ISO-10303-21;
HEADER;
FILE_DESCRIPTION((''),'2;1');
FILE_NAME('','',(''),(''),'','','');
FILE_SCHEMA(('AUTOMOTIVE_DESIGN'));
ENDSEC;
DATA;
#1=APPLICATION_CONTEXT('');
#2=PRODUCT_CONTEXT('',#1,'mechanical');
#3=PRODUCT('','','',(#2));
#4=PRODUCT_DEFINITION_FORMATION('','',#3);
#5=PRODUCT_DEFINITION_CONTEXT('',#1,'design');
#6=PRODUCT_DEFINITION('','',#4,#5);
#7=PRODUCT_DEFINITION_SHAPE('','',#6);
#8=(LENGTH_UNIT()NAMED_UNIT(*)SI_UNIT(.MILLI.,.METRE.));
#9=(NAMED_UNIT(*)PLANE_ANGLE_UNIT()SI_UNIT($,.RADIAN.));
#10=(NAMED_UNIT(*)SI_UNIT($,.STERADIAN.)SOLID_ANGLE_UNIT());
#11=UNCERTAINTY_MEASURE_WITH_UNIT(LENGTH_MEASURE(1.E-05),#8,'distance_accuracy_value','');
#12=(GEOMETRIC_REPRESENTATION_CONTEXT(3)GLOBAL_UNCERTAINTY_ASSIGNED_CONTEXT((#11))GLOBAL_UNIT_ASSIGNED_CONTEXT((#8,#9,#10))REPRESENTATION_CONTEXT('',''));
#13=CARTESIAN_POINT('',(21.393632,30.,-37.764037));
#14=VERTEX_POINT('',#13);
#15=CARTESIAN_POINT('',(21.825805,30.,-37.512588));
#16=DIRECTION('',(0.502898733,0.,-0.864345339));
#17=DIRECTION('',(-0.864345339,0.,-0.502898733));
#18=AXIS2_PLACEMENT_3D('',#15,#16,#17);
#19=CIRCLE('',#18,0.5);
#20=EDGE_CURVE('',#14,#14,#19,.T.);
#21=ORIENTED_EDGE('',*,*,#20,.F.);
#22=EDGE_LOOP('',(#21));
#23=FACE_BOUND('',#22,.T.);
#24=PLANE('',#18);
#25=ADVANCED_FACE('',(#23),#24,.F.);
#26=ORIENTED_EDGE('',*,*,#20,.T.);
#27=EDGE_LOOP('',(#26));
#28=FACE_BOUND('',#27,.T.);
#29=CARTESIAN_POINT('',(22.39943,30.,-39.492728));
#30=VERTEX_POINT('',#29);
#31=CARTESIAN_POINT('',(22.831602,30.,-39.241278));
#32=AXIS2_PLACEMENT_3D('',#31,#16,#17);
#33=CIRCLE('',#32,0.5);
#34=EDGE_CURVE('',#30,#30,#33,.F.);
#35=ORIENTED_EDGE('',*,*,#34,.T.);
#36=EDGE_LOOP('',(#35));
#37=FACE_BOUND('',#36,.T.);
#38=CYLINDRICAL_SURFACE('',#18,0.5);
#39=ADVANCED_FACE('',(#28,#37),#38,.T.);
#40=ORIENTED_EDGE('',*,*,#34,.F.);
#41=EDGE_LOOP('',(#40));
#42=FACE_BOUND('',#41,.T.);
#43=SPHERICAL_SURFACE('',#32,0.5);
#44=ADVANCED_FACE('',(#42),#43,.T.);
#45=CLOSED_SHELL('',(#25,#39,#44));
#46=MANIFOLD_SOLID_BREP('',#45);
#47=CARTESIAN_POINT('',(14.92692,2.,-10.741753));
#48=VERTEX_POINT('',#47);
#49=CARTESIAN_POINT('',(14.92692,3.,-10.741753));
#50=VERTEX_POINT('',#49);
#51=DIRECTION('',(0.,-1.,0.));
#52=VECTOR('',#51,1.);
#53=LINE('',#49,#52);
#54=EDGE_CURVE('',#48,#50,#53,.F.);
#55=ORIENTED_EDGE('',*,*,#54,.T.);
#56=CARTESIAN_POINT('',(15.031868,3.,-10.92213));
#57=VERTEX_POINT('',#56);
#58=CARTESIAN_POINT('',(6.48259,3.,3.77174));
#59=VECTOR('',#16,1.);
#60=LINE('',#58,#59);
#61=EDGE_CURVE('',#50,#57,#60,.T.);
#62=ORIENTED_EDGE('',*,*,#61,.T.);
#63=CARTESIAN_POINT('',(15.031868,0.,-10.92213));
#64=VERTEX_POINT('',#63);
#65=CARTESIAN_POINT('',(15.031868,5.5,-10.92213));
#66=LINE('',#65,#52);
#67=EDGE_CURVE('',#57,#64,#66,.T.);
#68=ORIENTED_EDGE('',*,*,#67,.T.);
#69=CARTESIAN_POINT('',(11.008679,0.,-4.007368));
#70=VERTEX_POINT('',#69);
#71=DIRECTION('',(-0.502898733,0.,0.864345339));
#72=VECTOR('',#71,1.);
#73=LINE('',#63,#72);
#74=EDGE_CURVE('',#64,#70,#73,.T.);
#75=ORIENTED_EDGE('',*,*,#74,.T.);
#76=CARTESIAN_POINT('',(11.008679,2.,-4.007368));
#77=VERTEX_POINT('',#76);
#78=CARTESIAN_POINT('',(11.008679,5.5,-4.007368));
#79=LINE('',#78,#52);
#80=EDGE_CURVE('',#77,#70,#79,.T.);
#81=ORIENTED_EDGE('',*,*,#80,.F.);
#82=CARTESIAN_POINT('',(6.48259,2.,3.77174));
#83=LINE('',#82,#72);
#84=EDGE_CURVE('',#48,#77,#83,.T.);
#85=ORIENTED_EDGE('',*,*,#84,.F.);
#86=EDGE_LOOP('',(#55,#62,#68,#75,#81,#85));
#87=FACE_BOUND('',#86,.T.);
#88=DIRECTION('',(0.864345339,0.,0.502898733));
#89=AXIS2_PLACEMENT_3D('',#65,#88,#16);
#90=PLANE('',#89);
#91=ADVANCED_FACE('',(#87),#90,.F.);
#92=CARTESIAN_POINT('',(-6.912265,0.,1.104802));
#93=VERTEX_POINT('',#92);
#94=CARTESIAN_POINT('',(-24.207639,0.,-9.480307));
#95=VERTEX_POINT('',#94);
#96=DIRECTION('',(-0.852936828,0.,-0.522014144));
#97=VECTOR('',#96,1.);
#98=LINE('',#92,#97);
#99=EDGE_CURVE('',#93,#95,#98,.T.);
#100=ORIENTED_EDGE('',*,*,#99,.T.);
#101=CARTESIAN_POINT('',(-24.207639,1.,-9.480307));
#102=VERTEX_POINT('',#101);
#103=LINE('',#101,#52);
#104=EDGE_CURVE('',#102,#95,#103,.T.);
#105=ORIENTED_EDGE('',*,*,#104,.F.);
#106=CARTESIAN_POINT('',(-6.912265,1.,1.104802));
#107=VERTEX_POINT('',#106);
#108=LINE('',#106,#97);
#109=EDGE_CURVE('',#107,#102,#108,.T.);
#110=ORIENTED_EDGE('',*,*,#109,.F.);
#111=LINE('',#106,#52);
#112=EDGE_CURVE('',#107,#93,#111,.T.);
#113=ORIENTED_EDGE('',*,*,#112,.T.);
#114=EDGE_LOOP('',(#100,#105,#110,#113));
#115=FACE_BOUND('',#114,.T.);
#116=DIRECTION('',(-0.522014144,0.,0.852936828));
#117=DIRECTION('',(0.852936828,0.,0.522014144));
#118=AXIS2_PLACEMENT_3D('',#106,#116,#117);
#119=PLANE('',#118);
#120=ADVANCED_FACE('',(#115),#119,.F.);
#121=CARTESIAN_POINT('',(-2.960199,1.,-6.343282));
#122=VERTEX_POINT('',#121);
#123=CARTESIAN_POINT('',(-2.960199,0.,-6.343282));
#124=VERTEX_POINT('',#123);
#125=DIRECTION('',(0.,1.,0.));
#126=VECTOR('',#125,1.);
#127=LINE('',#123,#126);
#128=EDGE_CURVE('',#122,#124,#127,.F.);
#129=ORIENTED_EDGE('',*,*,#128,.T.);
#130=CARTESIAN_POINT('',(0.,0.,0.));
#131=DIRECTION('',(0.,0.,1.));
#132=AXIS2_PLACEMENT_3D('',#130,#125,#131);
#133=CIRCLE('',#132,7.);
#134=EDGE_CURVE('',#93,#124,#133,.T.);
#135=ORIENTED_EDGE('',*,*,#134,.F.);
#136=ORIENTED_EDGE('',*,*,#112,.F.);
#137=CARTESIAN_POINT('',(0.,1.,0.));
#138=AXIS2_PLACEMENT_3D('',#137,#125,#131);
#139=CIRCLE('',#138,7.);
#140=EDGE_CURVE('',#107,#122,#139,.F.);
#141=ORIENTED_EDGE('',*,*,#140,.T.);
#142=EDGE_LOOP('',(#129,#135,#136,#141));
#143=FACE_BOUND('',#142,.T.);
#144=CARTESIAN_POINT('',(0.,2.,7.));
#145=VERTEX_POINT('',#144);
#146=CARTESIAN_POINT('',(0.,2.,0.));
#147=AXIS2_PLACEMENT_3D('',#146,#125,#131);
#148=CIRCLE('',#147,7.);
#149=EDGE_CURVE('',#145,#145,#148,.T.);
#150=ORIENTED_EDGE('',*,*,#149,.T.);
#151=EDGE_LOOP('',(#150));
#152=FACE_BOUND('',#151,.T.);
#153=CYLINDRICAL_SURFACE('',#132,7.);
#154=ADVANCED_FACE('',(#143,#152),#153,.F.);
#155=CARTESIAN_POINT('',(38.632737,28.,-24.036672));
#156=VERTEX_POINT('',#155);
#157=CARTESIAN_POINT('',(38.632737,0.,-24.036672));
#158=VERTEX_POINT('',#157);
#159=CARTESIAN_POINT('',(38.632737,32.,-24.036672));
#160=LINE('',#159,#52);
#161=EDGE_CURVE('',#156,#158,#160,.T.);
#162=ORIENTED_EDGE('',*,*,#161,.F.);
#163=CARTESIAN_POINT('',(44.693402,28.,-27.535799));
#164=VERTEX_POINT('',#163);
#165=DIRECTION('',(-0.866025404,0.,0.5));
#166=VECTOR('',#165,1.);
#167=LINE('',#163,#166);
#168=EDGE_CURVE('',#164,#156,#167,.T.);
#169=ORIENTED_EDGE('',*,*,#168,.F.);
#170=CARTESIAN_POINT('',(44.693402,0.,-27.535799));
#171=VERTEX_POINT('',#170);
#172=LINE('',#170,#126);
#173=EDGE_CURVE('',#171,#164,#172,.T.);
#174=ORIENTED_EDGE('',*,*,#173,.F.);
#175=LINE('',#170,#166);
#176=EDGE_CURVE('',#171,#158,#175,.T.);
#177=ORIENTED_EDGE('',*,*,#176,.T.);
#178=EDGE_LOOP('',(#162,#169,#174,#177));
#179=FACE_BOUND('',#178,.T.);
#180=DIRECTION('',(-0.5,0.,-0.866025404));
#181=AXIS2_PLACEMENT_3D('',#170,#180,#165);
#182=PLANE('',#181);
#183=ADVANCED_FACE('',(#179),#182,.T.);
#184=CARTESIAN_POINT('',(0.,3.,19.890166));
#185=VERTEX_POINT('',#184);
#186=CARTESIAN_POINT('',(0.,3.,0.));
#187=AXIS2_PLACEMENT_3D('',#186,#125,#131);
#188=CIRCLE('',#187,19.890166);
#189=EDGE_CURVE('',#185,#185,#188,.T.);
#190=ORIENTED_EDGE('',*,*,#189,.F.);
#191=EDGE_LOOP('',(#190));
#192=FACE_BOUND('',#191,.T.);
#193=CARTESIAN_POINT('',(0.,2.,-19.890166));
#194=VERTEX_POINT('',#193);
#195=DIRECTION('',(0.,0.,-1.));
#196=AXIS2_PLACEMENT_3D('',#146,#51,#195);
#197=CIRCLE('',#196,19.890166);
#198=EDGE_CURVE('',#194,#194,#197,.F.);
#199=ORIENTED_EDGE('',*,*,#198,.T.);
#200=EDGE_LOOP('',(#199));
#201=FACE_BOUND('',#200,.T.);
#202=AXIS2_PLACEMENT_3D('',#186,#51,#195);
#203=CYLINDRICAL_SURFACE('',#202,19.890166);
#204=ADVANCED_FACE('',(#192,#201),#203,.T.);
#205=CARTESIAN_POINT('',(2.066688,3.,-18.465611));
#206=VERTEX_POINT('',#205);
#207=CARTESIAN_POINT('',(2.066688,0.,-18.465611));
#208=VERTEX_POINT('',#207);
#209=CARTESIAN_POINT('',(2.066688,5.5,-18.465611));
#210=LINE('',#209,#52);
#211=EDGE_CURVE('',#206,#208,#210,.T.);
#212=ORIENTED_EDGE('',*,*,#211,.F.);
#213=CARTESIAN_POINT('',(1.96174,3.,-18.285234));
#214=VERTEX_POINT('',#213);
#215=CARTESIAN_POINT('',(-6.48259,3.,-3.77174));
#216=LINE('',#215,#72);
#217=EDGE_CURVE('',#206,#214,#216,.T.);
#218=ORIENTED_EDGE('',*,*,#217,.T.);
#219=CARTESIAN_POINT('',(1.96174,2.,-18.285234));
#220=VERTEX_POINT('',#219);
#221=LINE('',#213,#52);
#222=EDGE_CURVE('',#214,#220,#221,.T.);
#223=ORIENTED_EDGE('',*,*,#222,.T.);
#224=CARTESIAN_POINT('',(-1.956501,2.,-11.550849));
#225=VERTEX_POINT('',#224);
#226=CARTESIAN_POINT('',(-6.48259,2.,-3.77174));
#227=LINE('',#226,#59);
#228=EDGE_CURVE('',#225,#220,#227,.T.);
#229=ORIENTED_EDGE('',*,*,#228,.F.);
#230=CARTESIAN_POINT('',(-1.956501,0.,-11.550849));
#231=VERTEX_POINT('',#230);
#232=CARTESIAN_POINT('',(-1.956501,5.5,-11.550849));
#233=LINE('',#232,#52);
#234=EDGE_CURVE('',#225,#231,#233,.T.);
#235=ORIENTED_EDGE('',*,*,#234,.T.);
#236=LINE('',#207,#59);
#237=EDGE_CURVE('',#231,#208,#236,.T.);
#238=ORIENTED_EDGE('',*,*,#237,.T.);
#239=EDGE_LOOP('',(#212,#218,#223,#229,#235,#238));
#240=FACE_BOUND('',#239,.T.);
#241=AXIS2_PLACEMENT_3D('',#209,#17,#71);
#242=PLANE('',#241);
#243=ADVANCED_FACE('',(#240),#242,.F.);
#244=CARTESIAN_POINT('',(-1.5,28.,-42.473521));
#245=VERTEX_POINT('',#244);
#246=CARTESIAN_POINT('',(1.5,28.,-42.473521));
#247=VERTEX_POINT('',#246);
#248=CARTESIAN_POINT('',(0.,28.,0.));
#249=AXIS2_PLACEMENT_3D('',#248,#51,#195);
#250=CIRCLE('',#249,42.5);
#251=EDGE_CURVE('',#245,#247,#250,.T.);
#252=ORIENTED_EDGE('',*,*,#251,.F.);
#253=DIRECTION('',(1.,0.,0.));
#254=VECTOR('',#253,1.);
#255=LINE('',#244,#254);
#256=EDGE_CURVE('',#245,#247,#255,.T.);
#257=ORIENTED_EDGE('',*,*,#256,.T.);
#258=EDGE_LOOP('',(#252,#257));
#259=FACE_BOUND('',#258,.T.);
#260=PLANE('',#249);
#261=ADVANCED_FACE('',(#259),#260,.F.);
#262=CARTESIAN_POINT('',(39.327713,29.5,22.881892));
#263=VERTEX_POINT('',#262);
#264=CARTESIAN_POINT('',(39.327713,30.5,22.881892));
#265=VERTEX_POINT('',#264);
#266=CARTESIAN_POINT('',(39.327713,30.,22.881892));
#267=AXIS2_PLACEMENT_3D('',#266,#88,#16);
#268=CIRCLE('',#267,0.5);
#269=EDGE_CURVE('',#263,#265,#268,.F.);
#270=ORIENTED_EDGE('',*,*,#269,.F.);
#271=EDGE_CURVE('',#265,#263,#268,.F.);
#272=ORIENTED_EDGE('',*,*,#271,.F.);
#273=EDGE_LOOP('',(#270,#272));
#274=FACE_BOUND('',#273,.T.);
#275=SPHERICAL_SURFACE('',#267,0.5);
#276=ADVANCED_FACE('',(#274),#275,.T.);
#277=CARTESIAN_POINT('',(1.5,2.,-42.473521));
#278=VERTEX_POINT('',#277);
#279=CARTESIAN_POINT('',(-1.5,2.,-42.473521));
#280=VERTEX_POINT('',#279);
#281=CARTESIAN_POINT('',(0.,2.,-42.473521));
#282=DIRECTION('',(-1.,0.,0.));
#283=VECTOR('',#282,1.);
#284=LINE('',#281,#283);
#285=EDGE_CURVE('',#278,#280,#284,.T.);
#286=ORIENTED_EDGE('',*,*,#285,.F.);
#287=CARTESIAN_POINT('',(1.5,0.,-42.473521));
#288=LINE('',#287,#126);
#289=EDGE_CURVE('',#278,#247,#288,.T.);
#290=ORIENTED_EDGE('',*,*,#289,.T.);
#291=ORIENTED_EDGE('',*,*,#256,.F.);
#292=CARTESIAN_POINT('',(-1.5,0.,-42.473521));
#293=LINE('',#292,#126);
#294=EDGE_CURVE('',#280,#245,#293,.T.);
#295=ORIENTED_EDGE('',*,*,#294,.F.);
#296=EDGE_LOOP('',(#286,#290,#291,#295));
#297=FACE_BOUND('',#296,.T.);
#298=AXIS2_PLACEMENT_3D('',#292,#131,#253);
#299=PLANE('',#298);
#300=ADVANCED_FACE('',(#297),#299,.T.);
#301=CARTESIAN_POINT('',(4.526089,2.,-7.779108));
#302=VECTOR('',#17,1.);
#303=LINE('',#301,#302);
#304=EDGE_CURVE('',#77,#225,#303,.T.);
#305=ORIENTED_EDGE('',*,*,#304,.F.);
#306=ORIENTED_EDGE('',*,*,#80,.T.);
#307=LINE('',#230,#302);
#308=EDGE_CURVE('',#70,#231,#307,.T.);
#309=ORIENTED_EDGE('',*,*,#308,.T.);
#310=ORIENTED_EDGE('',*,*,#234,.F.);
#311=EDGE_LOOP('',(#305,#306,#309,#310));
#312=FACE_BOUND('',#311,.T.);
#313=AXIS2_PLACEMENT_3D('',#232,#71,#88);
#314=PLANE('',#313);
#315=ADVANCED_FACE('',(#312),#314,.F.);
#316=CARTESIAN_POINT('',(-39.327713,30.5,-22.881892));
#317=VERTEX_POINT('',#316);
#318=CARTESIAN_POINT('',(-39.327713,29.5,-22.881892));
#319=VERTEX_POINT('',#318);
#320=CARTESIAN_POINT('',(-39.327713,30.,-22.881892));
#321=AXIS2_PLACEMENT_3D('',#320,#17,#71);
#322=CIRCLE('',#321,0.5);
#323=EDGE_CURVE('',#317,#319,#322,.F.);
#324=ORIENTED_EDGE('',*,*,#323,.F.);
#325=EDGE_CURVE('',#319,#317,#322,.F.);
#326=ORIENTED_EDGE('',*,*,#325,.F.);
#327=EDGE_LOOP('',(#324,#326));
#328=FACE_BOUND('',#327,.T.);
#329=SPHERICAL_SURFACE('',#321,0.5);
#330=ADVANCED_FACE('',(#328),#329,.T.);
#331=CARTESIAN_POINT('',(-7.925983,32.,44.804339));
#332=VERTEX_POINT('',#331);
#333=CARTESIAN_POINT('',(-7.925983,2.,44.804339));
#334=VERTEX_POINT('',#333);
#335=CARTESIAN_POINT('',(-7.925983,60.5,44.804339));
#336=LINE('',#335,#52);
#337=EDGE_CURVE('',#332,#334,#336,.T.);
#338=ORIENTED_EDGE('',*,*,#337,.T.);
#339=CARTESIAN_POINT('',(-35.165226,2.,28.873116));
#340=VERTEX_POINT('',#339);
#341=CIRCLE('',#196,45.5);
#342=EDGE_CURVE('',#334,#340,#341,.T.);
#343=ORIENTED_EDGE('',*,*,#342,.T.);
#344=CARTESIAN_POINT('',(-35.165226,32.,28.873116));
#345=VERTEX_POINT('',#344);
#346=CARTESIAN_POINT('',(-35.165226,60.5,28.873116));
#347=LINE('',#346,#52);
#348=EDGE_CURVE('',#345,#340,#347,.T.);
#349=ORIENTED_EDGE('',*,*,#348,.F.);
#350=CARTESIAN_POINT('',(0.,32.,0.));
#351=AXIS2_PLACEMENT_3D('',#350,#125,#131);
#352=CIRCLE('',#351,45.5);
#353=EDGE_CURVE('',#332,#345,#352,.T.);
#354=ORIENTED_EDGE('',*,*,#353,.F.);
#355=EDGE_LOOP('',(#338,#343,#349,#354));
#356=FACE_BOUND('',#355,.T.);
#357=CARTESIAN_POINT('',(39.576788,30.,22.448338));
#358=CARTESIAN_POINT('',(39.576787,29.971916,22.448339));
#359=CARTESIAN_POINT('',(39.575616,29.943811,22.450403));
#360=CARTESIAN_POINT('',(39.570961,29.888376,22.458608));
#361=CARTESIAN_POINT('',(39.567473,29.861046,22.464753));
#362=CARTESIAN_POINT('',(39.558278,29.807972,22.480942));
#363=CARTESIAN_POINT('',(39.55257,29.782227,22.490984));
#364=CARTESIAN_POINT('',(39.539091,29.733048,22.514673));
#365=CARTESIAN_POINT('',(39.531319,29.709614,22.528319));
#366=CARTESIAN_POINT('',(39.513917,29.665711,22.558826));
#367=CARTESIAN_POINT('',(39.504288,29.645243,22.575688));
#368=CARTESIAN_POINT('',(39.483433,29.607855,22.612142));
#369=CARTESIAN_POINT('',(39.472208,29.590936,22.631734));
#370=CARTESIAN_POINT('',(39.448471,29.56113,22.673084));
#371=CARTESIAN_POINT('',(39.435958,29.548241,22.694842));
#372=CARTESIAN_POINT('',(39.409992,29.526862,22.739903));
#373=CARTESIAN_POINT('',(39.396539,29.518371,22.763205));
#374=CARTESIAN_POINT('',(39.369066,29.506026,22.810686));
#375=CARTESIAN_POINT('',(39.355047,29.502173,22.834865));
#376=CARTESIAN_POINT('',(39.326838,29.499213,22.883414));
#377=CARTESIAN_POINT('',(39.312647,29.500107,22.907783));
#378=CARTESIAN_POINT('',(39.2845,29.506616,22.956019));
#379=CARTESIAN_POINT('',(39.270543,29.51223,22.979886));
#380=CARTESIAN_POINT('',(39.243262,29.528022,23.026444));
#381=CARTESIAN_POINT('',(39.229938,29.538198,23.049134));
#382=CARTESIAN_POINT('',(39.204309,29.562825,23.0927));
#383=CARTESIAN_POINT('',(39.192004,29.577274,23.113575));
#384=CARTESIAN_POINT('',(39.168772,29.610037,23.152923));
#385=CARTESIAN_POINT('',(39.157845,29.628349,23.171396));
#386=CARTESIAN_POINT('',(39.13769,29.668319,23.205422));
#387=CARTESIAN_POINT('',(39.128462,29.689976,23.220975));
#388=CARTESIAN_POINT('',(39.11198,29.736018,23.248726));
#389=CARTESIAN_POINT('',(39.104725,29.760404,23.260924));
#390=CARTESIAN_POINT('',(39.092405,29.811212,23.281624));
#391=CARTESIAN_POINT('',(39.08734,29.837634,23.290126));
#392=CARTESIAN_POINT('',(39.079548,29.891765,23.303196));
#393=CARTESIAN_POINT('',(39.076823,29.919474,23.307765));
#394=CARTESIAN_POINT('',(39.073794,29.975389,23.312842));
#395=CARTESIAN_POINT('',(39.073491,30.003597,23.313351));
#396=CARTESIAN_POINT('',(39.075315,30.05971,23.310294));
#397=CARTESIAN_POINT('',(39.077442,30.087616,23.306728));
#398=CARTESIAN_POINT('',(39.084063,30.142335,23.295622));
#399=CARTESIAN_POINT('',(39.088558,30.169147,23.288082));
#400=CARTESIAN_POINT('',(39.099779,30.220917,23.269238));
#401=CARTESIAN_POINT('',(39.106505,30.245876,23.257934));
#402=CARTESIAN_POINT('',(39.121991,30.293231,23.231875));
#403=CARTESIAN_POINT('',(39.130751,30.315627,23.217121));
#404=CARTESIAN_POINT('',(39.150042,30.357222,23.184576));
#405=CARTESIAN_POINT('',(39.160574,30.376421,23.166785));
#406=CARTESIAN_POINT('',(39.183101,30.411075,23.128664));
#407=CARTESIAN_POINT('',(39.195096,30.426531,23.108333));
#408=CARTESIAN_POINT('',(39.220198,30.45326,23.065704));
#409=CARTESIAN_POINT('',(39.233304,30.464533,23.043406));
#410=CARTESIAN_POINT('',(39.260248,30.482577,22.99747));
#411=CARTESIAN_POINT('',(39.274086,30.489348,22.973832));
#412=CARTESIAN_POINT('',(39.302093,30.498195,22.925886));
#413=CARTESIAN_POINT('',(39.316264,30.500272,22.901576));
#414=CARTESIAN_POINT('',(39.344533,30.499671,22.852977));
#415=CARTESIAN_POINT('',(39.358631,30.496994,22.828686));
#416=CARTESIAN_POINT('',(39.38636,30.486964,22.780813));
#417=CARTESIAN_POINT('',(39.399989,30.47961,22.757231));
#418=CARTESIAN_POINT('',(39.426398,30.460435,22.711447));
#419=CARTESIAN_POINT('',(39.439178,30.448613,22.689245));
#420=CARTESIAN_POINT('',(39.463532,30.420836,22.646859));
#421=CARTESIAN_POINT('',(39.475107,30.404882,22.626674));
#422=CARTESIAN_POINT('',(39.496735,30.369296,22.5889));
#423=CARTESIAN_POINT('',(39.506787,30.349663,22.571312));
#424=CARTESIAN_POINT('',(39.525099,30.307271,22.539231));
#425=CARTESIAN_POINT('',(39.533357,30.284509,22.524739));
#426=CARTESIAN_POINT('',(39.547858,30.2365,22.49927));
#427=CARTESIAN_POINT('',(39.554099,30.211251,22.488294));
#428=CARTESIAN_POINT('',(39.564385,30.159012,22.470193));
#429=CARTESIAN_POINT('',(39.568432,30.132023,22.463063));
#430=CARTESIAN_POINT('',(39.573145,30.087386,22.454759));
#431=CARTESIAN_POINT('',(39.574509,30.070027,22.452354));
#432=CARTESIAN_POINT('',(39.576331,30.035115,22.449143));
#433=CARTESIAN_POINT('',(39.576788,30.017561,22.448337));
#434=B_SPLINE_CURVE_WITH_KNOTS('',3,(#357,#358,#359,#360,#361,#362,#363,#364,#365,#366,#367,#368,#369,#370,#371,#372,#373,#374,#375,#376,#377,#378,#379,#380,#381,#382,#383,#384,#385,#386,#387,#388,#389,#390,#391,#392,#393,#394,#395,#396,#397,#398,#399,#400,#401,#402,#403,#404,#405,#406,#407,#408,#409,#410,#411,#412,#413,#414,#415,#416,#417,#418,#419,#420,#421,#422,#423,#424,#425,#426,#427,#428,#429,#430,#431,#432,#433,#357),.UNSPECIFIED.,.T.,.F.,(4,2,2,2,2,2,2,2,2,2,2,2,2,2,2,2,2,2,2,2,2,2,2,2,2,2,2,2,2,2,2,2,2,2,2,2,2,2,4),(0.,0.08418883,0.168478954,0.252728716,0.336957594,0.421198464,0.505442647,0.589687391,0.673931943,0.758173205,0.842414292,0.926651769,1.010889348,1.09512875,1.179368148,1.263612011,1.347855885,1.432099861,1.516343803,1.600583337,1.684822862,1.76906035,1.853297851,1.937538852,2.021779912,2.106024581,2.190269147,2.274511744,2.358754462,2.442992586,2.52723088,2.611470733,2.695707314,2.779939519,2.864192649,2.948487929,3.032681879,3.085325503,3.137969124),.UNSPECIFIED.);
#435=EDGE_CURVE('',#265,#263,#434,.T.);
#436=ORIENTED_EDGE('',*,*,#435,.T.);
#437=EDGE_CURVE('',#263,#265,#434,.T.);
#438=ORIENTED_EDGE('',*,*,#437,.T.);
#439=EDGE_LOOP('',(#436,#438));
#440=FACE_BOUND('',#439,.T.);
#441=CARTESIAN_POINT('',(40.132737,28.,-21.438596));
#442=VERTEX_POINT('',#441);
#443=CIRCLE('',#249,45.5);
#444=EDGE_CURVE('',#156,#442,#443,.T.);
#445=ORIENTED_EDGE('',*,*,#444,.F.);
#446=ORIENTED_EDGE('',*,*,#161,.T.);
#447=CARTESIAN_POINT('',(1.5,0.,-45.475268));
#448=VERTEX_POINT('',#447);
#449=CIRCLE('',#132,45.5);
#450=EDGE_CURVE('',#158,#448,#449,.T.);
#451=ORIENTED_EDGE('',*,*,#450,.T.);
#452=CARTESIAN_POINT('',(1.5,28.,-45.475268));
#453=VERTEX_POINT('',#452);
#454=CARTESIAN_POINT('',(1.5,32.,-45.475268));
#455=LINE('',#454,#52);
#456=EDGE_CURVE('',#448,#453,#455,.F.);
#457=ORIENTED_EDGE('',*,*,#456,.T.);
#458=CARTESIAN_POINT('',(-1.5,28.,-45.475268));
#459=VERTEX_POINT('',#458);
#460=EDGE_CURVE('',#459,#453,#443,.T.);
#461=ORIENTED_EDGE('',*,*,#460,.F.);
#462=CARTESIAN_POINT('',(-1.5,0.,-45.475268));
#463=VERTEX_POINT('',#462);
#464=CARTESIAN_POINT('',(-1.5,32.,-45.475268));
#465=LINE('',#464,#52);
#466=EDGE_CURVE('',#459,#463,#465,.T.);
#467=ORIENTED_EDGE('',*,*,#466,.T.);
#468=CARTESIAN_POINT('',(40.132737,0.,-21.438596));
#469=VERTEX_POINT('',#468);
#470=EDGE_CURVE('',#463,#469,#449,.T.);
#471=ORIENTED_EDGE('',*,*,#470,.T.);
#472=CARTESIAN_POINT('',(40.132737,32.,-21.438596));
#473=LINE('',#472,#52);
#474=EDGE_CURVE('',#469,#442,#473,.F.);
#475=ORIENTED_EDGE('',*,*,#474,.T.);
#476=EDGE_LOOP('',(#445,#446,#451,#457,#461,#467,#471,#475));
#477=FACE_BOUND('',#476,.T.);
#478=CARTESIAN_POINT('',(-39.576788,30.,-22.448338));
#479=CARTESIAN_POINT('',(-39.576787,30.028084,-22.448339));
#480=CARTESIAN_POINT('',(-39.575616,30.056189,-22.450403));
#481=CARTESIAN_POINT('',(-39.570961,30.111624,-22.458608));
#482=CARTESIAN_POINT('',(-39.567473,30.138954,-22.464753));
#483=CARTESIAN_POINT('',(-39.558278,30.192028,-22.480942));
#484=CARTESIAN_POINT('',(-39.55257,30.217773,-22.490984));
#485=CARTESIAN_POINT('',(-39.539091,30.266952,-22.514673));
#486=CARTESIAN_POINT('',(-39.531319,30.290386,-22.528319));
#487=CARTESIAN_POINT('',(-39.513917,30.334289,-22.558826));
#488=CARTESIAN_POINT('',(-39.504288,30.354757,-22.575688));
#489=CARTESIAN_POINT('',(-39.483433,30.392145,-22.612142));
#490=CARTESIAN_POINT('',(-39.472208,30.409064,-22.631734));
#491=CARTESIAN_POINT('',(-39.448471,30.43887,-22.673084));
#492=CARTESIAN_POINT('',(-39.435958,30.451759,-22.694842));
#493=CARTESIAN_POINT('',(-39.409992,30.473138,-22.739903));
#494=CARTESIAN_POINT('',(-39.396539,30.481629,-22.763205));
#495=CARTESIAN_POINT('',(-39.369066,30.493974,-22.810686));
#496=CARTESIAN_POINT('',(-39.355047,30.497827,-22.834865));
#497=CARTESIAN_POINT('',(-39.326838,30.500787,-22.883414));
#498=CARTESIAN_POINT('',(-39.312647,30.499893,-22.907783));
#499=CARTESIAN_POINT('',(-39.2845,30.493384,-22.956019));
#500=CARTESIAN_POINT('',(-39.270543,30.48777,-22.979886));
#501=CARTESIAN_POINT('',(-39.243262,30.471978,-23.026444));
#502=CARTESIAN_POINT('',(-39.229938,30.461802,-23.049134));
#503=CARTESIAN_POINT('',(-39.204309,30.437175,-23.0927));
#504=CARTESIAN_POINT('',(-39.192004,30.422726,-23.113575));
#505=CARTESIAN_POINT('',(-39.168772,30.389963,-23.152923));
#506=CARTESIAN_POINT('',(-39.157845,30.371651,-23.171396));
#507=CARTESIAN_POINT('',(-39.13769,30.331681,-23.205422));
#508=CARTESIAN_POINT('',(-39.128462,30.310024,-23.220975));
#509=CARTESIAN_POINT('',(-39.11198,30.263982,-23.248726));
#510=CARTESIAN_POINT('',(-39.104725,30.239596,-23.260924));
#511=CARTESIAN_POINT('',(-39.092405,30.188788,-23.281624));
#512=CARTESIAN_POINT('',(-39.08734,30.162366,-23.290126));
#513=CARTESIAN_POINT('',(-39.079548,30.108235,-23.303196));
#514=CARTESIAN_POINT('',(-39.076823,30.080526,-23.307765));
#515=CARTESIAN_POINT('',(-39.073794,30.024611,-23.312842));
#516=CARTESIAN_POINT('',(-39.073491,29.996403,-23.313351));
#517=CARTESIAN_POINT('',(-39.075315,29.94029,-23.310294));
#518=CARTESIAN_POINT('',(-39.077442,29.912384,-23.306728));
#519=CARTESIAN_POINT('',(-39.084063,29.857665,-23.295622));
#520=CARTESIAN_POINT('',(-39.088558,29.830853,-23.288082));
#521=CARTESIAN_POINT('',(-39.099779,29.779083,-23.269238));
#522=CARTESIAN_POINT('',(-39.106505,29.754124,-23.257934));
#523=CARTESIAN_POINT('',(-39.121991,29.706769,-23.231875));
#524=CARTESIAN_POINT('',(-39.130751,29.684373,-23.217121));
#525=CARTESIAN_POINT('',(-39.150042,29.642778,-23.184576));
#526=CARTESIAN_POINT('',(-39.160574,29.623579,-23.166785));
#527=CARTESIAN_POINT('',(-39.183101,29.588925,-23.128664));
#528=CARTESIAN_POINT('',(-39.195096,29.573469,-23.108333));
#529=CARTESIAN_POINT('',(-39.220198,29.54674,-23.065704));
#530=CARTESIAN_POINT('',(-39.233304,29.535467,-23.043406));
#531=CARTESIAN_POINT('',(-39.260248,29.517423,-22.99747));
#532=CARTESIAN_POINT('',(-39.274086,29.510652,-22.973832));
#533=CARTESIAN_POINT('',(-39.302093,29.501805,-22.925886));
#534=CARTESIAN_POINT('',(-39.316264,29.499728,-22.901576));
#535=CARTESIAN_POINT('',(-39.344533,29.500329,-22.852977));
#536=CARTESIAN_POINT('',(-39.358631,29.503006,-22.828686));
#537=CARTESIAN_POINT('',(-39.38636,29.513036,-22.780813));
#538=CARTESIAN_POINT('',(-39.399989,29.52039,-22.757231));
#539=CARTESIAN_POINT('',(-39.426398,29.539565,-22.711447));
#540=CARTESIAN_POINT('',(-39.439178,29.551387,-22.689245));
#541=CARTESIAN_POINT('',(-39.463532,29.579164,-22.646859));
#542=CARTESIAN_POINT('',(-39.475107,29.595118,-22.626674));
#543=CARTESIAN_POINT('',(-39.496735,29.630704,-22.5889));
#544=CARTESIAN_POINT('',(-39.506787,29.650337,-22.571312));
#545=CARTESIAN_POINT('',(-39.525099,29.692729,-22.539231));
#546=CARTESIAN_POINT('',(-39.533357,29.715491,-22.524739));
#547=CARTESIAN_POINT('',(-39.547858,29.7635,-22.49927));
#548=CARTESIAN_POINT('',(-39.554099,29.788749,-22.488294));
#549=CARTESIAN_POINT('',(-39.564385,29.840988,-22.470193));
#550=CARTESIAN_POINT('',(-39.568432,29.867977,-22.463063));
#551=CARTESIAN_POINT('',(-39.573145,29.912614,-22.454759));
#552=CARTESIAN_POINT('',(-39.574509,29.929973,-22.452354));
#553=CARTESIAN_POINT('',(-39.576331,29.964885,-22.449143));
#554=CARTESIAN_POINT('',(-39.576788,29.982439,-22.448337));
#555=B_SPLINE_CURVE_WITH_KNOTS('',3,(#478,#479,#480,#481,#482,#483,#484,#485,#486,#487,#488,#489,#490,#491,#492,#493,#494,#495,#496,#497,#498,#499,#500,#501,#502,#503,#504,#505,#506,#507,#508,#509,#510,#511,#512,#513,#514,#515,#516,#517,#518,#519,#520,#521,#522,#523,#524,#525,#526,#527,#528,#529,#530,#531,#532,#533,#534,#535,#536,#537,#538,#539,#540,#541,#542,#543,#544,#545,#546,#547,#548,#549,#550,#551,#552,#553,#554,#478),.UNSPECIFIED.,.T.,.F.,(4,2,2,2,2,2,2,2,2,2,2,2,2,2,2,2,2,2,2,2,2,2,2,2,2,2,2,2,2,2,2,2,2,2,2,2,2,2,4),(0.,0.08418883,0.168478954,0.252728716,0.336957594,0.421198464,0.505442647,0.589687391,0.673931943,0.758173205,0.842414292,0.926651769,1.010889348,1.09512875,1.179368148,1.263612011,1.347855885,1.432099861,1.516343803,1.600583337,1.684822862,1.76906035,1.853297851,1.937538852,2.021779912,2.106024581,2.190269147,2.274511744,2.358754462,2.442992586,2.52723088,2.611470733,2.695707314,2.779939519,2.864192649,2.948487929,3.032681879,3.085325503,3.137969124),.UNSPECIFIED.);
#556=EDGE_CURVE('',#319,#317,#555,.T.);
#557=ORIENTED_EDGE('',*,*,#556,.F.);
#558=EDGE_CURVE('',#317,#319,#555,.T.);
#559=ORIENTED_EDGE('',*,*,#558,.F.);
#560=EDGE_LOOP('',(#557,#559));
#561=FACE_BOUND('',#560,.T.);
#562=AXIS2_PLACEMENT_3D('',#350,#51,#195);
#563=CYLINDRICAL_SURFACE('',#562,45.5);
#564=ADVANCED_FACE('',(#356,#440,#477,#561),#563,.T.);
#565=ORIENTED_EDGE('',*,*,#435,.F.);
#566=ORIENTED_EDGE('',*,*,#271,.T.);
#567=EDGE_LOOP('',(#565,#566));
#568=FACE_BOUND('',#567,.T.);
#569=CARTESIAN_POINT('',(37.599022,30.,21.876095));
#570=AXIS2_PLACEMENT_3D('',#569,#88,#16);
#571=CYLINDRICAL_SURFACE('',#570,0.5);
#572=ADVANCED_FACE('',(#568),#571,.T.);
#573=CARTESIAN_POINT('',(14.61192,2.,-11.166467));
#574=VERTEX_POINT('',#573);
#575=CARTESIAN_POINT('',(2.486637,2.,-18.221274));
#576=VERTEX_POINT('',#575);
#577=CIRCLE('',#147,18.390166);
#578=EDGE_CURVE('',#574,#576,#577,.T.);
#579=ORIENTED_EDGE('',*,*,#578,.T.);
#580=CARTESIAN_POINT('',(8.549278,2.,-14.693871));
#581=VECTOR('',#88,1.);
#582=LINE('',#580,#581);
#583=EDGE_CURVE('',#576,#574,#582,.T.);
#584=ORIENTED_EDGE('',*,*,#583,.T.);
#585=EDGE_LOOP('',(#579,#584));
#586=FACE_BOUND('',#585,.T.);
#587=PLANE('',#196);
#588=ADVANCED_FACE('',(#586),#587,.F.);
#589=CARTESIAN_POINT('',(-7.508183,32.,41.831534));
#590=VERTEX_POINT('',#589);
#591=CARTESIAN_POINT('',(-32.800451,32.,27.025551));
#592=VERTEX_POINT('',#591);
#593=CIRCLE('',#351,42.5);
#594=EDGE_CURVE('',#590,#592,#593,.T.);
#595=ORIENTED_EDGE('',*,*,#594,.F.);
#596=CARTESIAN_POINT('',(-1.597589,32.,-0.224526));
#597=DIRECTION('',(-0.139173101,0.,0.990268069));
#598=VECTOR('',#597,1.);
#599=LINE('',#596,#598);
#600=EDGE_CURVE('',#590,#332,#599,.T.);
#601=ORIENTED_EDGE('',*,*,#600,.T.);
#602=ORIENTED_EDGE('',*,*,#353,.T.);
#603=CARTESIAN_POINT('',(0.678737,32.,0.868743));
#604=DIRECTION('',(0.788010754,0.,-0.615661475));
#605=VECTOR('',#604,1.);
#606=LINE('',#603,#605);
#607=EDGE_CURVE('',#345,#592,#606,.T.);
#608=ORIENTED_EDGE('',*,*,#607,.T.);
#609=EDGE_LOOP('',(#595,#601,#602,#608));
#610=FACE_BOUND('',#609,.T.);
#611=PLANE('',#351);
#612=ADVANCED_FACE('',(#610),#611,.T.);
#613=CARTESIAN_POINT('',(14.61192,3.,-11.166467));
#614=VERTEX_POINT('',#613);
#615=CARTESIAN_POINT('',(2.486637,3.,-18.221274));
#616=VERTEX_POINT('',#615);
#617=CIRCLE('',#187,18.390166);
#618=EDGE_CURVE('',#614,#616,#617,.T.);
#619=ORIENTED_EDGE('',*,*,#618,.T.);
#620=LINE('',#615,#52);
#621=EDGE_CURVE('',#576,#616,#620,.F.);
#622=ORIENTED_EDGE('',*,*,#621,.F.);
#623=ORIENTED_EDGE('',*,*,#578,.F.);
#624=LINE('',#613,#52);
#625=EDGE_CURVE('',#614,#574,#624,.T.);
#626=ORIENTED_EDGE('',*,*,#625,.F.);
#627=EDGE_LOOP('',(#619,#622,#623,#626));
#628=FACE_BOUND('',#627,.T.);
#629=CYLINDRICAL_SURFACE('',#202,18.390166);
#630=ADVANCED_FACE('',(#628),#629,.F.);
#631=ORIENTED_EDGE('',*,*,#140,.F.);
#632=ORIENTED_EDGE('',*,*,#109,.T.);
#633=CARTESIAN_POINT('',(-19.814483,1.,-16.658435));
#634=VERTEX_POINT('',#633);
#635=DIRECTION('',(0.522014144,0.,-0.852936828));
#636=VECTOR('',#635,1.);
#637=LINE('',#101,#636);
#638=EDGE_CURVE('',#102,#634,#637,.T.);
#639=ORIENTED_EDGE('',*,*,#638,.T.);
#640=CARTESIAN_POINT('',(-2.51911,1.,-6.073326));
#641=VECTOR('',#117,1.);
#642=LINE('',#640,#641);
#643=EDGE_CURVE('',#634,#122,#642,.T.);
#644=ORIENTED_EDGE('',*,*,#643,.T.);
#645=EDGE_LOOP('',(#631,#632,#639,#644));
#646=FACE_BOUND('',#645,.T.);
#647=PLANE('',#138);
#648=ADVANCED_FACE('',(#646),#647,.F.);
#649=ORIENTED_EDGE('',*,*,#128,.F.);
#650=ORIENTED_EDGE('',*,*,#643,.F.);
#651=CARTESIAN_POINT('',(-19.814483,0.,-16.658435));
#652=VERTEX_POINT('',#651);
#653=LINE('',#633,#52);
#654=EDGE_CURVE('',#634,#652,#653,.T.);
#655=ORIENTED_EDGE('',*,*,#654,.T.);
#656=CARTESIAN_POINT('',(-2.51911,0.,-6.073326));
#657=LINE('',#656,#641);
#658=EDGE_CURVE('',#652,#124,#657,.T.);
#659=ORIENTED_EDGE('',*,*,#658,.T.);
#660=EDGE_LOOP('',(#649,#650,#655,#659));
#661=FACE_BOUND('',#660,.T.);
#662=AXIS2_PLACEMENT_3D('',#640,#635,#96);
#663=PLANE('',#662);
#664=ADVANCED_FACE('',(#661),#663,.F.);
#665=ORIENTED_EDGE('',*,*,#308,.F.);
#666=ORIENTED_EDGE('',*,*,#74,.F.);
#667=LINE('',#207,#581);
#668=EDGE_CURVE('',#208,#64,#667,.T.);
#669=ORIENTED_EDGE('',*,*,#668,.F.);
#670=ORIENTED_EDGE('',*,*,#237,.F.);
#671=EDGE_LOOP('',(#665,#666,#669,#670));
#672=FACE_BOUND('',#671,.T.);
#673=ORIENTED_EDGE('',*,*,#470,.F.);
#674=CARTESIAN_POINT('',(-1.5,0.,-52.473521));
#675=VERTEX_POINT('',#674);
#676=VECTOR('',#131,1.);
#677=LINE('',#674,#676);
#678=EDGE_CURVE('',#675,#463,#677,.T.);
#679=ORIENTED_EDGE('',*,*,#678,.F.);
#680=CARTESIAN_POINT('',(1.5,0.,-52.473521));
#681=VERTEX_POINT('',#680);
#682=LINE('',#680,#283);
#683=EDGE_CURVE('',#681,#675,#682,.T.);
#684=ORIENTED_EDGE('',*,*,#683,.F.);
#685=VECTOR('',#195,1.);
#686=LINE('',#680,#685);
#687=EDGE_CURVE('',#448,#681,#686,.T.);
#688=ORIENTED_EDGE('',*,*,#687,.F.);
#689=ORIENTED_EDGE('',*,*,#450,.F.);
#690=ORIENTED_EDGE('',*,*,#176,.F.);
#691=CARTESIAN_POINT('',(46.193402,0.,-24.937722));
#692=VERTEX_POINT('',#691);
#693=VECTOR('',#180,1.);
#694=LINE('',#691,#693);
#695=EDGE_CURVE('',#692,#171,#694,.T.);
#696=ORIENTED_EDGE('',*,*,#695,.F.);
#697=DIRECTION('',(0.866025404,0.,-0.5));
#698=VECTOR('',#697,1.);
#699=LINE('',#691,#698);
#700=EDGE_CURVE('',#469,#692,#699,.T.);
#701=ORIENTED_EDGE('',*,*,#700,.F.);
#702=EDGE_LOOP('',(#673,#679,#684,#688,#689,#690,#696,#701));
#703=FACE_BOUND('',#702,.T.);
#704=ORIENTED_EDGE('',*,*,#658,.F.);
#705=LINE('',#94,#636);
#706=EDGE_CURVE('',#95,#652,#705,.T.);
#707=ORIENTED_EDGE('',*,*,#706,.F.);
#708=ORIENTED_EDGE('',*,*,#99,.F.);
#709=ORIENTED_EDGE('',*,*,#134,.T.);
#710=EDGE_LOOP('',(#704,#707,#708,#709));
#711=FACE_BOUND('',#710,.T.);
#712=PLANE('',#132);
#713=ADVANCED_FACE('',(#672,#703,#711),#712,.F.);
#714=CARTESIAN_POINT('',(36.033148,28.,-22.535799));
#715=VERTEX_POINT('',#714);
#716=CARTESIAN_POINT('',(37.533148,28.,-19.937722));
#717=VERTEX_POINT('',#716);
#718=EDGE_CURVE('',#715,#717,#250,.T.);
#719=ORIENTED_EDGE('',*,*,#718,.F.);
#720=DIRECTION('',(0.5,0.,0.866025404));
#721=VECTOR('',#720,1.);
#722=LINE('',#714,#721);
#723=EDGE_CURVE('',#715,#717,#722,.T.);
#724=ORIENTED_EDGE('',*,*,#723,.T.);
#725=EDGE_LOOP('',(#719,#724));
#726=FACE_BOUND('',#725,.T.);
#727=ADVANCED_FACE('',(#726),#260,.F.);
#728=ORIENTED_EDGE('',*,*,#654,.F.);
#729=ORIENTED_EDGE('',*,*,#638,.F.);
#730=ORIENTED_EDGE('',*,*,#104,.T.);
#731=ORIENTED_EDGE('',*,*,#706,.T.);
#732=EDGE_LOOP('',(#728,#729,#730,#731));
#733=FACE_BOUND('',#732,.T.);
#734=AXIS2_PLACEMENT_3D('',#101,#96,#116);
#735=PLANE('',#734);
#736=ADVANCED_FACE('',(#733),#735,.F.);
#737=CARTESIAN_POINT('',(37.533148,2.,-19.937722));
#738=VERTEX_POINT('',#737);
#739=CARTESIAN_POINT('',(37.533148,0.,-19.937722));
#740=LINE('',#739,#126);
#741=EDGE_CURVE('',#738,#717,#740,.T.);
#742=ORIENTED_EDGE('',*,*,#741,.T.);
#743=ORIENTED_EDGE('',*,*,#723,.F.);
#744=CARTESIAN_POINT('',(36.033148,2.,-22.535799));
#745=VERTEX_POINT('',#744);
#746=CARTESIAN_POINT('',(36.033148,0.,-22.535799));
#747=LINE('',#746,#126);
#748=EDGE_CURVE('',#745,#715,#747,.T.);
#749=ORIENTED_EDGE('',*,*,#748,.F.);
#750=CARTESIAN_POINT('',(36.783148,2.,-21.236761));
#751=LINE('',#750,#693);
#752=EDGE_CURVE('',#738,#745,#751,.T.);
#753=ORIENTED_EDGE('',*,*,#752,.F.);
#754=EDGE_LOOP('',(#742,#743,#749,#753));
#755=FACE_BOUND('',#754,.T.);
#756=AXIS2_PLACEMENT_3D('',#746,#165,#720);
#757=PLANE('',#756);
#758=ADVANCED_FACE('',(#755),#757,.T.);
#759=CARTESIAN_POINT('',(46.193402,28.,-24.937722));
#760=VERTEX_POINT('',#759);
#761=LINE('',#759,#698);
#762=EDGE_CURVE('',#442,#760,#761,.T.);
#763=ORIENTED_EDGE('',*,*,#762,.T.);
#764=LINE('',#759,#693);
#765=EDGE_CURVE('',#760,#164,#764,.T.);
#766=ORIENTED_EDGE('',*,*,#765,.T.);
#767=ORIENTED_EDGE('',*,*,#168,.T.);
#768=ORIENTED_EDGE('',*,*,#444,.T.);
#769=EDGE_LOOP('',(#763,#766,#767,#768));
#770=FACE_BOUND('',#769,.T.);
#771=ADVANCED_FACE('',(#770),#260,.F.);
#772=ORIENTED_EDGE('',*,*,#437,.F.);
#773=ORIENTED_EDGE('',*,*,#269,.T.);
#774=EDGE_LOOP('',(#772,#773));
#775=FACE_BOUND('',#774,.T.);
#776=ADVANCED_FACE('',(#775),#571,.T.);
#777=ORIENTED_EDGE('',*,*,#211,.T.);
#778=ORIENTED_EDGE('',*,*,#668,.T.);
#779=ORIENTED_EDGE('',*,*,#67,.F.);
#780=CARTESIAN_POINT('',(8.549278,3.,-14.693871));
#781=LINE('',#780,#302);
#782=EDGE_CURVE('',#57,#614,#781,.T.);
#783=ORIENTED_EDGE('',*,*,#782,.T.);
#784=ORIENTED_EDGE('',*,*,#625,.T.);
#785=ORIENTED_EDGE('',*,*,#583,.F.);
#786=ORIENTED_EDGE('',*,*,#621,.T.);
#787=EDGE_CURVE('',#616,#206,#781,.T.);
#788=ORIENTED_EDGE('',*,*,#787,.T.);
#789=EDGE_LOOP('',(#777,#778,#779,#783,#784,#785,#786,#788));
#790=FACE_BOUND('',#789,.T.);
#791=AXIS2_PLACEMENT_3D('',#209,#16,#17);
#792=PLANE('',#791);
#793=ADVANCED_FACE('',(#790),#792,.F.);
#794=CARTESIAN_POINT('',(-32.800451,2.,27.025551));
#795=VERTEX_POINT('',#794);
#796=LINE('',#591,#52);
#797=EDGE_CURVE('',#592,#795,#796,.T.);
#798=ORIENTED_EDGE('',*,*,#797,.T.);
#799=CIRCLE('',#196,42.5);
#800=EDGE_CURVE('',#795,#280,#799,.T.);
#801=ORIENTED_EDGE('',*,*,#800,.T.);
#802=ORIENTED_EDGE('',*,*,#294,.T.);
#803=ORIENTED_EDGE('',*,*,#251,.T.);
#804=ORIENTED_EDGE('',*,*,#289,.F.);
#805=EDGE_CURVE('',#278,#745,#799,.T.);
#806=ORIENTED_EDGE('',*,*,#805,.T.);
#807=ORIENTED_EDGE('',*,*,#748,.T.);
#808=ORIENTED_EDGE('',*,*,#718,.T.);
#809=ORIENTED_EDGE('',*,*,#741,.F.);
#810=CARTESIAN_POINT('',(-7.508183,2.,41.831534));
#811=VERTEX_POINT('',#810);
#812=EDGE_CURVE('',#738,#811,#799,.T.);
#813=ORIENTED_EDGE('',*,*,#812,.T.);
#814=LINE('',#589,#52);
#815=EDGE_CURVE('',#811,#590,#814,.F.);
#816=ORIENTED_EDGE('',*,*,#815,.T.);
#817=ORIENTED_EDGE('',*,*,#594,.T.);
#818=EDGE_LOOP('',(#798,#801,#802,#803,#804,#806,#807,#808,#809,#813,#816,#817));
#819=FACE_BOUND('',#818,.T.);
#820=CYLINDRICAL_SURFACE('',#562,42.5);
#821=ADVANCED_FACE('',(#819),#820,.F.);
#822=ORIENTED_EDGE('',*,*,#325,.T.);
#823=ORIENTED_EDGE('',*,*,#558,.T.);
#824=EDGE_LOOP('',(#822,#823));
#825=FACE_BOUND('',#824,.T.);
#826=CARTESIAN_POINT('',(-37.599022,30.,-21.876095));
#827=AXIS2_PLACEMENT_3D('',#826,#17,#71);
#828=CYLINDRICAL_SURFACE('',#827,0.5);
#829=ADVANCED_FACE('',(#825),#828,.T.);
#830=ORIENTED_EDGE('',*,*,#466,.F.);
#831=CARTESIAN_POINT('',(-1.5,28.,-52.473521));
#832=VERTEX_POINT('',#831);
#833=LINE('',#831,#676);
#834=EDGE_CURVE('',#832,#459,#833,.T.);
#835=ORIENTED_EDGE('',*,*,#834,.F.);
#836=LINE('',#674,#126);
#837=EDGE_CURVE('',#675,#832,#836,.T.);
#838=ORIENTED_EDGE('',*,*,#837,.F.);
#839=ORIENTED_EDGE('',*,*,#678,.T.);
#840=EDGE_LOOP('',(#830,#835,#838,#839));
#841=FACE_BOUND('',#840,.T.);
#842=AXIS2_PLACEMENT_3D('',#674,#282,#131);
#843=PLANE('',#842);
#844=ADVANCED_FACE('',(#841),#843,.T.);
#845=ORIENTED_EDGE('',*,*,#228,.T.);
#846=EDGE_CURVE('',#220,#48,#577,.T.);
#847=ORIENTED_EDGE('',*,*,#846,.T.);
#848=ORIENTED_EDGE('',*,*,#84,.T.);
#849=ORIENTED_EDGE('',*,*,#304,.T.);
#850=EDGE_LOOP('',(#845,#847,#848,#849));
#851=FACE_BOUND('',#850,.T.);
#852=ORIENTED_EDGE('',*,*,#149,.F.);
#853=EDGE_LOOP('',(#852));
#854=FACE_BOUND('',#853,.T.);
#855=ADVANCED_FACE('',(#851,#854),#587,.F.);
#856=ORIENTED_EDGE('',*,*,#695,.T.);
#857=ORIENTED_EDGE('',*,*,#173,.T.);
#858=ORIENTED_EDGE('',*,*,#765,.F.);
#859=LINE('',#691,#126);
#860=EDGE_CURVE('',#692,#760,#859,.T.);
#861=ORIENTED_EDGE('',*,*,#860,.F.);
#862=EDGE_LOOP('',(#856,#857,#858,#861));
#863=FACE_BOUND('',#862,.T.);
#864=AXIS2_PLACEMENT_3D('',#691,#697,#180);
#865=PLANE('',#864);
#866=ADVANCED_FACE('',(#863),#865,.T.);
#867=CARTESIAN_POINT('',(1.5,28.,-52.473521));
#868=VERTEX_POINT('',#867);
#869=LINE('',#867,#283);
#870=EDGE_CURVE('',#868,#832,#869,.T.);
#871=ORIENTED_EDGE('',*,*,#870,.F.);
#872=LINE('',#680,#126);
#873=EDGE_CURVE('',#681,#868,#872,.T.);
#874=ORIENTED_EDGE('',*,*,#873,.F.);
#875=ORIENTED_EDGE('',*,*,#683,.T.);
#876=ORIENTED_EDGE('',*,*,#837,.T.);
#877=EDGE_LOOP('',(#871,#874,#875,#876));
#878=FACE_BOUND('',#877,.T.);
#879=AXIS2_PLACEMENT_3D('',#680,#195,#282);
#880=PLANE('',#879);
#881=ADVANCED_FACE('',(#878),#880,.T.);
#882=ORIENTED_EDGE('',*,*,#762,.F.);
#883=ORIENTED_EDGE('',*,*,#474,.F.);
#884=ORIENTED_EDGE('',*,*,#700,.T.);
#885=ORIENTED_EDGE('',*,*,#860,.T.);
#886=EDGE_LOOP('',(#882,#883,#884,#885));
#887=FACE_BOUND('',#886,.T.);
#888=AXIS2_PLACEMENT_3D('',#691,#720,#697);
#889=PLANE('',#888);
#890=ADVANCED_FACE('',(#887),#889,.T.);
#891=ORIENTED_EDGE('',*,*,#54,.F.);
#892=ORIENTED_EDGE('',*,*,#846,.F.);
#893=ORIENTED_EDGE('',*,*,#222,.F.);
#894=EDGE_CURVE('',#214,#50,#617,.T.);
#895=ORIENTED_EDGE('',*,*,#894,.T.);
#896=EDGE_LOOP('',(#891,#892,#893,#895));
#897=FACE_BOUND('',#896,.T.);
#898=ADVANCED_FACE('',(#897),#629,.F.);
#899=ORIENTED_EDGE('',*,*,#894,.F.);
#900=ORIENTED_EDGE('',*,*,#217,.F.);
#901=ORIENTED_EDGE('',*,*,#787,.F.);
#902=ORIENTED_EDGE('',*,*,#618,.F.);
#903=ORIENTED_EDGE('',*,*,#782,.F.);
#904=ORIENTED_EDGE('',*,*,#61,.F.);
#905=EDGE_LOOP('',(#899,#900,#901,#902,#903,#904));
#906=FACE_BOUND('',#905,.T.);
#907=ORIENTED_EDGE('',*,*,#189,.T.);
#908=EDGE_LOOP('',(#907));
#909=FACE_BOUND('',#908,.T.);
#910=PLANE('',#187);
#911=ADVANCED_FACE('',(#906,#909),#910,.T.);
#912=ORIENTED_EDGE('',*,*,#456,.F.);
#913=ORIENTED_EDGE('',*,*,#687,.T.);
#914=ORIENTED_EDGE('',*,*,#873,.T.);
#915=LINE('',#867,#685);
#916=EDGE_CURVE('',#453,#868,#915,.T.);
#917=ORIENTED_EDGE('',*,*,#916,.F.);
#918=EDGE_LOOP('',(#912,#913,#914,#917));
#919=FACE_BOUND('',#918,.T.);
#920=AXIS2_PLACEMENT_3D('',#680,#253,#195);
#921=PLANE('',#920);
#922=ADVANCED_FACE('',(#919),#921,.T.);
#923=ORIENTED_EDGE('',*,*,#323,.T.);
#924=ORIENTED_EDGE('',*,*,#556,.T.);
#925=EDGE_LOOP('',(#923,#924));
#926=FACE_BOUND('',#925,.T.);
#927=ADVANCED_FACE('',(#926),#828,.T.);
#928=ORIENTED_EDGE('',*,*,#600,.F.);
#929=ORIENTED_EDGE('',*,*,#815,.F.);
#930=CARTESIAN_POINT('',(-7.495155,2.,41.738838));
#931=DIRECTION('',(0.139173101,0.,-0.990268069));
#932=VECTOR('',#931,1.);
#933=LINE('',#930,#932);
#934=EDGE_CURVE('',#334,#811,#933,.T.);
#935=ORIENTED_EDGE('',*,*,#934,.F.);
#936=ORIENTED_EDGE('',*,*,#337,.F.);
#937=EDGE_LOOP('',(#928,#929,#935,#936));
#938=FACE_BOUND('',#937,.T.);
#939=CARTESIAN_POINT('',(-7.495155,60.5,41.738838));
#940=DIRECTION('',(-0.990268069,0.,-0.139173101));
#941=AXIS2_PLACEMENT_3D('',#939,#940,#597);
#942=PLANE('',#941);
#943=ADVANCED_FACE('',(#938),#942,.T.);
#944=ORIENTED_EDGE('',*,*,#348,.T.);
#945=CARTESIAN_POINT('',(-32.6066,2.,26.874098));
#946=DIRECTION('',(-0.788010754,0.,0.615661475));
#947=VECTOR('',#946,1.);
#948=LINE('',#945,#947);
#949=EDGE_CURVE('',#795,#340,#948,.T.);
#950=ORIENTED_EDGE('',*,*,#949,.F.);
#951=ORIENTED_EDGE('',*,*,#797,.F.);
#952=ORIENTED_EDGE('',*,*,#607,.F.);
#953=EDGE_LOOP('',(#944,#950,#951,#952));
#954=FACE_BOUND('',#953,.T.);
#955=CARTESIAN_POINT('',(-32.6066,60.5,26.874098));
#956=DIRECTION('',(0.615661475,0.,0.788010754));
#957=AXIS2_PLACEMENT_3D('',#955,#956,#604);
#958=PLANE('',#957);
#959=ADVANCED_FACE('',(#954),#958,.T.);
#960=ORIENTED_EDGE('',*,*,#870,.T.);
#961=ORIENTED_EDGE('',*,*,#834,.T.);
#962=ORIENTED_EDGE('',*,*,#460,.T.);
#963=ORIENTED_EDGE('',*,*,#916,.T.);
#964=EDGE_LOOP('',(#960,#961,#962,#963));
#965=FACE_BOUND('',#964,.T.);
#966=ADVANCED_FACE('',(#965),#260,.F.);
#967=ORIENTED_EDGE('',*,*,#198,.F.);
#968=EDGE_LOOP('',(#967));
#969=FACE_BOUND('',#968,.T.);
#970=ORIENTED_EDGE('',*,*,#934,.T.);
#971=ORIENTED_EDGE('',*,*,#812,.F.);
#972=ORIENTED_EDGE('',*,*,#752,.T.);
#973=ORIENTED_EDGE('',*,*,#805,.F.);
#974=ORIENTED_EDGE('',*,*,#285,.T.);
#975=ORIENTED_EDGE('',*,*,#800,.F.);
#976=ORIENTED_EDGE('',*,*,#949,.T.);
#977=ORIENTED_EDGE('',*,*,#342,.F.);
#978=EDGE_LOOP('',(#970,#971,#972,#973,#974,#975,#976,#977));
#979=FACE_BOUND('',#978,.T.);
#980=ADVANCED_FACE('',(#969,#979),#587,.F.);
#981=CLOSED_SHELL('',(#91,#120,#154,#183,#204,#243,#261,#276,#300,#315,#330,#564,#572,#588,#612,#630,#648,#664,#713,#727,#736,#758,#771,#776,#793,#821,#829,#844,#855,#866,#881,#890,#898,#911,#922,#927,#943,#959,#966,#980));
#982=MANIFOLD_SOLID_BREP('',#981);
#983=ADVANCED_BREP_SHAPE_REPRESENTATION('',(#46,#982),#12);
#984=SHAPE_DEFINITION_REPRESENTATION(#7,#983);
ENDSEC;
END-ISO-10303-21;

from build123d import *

# Parameters (mm, degrees)
SKETCH1_R                = 45.5
SKETCH1_R_2              = 42.5
BOSS_EXTRUDE1_DEPTH      = 32
SKETCH2_R                = 45.5
BOSS_EXTRUDE2_DEPTH      = 2
SKETCH3_R                = 7
CUT_EXTRUDE1_DEPTH       = 2
BOSS_EXTRUDE4_DEPTH      = 26
BOSS_EXTRUDE4_DEPTH_BACK = 2
SKETCH7_W                = 3
SKETCH7_H                = 10
SKETCH8_R                = 19.890165718
SKETCH8_R_2              = 18.390165718
BOSS_EXTRUDE5_DEPTH      = 1
CUT_EXTRUDE4_DEPTH       = 5.5
CUT_EXTRUDE5_DEPTH       = 58.5
CUT_EXTRUDE6_DEPTH       = 1
BOSS_EXTRUDE6_DEPTH      = 0.5
BOSS_EXTRUDE6_DEPTH_BACK = 2
SKETCH13_R               = 0.5
FILLET1_R                = 0.5
BOSS_EXTRUDE7_START      = -2
SKETCH23_R               = 0.5
BOSS_EXTRUDE7_DEPTH      = 2.5
FILLET2_R                = 0.5
FILLET2_OF_MIRROR1_R     = 0.5


with BuildPart() as part:
    # Sketch1 → Boss-Extrude1 (new body)
    with BuildSketch(Plane(origin=(0, 0, 0), x_dir=(1, 0, 0), z_dir=(0, 1, 0))):
        with Locations(Location((0, 0, 0), (0, 0, 270))):
            Circle(SKETCH1_R)
        with Locations(Location((0, 0, 0), (0, 0, 270))):
            Circle(SKETCH1_R_2, mode=Mode.SUBTRACT)
    extrude(amount=BOSS_EXTRUDE1_DEPTH)

    # Sketch2 → Boss-Extrude2 (add)
    with BuildSketch(Plane.XZ):
        with Locations(Location((0, 0, 0), (0, 0, 90))):
            Circle(SKETCH2_R)
    extrude(amount=-BOSS_EXTRUDE2_DEPTH)

    # Sketch3 → Cut-Extrude1 (cut)
    with BuildSketch(Plane(origin=(0, 2, 0), x_dir=(1, 0, 0), z_dir=(0, 1, 0))):
        with Locations(Location((0, 0, 0), (0, 0, 270))):
            Circle(SKETCH3_R)
    extrude(amount=-CUT_EXTRUDE1_DEPTH, mode=Mode.SUBTRACT)

    # Sketch7 → Boss-Extrude4 (add, two sides: drawn at the far end of the back side and taken through both)
    with BuildSketch(Plane(origin=(0, 2, 0), x_dir=(1, 0, 0), z_dir=(0, 1, 0)).offset(-BOSS_EXTRUDE4_DEPTH_BACK)):
        with Locations((0, 47.473521163)):
            Rectangle(SKETCH7_W, SKETCH7_H)
        Polygon((46.193402353, 24.937722476), (37.533148315, 19.937722476), (36.033148315, 22.535798687), (44.693402353, 27.535798687), align=None)
    extrude(amount=BOSS_EXTRUDE4_DEPTH + BOSS_EXTRUDE4_DEPTH_BACK)

    # Sketch8 → Boss-Extrude5 (add)
    with BuildSketch(Plane(origin=(0, 2, 0), x_dir=(1, 0, 0), z_dir=(0, 1, 0))):
        with Locations(Location((0, 0, 0), (0, 0, 90))):
            Circle(SKETCH8_R)
        with Locations(Location((0, 0, 0), (0, 0, 270))):
            Circle(SKETCH8_R_2, mode=Mode.SUBTRACT)
    extrude(amount=BOSS_EXTRUDE5_DEPTH)

    # Sketch10 → Cut-Extrude4 (cut)
    with BuildSketch(Plane.XZ):
        Polygon((2.06668842, -18.465611254), (15.0318685, -10.92213026), (11.008678636, -4.007367551), (-1.956501443, -11.550848545), align=None)
    extrude(amount=-CUT_EXTRUDE4_DEPTH, mode=Mode.SUBTRACT)

    # Sketch11 → Cut-Extrude5 (cut)
    with BuildSketch(Plane(origin=(0, 2, 0), x_dir=(1, 0, 0), z_dir=(0, 1, 0))):
        Polygon((-32.606600292, -26.874098434), (-35.165226496, -28.87311631), (-33.824988888, -37.754161376), (-11.7382848, -48.772412552), (-7.925983096, -44.804338986), (-7.495155029, -41.738838001), (-9.978475631, -35.419229659), (-25.965270809, -26.874098434), align=None)
    extrude(amount=CUT_EXTRUDE5_DEPTH, mode=Mode.SUBTRACT)

    # Sketch12 → Cut-Extrude6 (cut)
    with BuildSketch(Plane.XZ):
        Polygon((-6.912265346, 1.104802147), (-24.20763883, -9.480307189), (-19.814483018, -16.658435267), (-2.519109534, -6.073325931), align=None)
    extrude(amount=-CUT_EXTRUDE6_DEPTH, mode=Mode.SUBTRACT)

    # Sketch23 → Boss-Extrude7 (add)
    with BuildSketch(Plane(origin=(39.327712908, 0, 22.881892348), x_dir=(0.5028987329328956, 0, -0.8643453386317811), z_dir=(0.8643453386317811, 0, 0.5028987329328956)).offset(BOSS_EXTRUDE7_START)):
        with Locations((0, 30)):
            Circle(SKETCH23_R)
    boss_extrude7 = extrude(amount=BOSS_EXTRUDE7_DEPTH)

    # Fillet2
    fillet2_edges = [part.edges().sort_by_distance(p)[0] for p in [
        (39.508436211, 30, 23.565514384),
    ]]
    fillet(fillet2_edges, radius=FILLET2_R - 0.0001)  # a hair under: the kernel refuses the full size

    # Mirror1: Boss-Extrude7 across plane
    add(boss_extrude7.mirror(Plane(origin=(0, 0, 0), x_dir=(-0.5028987329328956, 0, 0.864345338631781), z_dir=(0.8643453386317811, 0, 0.5028987329328956))))

    # Fillet2 of Mirror1
    fillet2_of_mirror1_edges = [part.edges().sort_by_distance(p)[0] for p in [
        (-40.011334944, 30, -22.701169046),
    ]]
    fillet(fillet2_of_mirror1_edges, radius=FILLET2_OF_MIRROR1_R - 0.0001)  # a hair under: the kernel refuses the full size


with BuildPart() as body_2:
    # Sketch13 → Boss-Extrude6 (new, two sides: drawn at the far end of the back side and taken through both)
    with BuildSketch(Plane(origin=(22.831602475, 0, -39.241278374), x_dir=(-0.8643453386317811, 0, -0.5028987329328956), z_dir=(0.5028987329328954, 0, -0.864345338631781)).offset(-BOSS_EXTRUDE6_DEPTH_BACK)):
        with Locations((0, 30)):
            Circle(SKETCH13_R)
    extrude(amount=BOSS_EXTRUDE6_DEPTH + BOSS_EXTRUDE6_DEPTH_BACK)

    # Fillet1
    fillet1_edges = [body_2.edges().sort_by_distance(p)[0] for p in [
        (23.515224511, 30, -39.422001677),
    ]]
    fillet(fillet1_edges, radius=FILLET1_R - 0.0001)  # a hair under: the kernel refuses the full size


solid = Compound([part.part, body_2.part])
